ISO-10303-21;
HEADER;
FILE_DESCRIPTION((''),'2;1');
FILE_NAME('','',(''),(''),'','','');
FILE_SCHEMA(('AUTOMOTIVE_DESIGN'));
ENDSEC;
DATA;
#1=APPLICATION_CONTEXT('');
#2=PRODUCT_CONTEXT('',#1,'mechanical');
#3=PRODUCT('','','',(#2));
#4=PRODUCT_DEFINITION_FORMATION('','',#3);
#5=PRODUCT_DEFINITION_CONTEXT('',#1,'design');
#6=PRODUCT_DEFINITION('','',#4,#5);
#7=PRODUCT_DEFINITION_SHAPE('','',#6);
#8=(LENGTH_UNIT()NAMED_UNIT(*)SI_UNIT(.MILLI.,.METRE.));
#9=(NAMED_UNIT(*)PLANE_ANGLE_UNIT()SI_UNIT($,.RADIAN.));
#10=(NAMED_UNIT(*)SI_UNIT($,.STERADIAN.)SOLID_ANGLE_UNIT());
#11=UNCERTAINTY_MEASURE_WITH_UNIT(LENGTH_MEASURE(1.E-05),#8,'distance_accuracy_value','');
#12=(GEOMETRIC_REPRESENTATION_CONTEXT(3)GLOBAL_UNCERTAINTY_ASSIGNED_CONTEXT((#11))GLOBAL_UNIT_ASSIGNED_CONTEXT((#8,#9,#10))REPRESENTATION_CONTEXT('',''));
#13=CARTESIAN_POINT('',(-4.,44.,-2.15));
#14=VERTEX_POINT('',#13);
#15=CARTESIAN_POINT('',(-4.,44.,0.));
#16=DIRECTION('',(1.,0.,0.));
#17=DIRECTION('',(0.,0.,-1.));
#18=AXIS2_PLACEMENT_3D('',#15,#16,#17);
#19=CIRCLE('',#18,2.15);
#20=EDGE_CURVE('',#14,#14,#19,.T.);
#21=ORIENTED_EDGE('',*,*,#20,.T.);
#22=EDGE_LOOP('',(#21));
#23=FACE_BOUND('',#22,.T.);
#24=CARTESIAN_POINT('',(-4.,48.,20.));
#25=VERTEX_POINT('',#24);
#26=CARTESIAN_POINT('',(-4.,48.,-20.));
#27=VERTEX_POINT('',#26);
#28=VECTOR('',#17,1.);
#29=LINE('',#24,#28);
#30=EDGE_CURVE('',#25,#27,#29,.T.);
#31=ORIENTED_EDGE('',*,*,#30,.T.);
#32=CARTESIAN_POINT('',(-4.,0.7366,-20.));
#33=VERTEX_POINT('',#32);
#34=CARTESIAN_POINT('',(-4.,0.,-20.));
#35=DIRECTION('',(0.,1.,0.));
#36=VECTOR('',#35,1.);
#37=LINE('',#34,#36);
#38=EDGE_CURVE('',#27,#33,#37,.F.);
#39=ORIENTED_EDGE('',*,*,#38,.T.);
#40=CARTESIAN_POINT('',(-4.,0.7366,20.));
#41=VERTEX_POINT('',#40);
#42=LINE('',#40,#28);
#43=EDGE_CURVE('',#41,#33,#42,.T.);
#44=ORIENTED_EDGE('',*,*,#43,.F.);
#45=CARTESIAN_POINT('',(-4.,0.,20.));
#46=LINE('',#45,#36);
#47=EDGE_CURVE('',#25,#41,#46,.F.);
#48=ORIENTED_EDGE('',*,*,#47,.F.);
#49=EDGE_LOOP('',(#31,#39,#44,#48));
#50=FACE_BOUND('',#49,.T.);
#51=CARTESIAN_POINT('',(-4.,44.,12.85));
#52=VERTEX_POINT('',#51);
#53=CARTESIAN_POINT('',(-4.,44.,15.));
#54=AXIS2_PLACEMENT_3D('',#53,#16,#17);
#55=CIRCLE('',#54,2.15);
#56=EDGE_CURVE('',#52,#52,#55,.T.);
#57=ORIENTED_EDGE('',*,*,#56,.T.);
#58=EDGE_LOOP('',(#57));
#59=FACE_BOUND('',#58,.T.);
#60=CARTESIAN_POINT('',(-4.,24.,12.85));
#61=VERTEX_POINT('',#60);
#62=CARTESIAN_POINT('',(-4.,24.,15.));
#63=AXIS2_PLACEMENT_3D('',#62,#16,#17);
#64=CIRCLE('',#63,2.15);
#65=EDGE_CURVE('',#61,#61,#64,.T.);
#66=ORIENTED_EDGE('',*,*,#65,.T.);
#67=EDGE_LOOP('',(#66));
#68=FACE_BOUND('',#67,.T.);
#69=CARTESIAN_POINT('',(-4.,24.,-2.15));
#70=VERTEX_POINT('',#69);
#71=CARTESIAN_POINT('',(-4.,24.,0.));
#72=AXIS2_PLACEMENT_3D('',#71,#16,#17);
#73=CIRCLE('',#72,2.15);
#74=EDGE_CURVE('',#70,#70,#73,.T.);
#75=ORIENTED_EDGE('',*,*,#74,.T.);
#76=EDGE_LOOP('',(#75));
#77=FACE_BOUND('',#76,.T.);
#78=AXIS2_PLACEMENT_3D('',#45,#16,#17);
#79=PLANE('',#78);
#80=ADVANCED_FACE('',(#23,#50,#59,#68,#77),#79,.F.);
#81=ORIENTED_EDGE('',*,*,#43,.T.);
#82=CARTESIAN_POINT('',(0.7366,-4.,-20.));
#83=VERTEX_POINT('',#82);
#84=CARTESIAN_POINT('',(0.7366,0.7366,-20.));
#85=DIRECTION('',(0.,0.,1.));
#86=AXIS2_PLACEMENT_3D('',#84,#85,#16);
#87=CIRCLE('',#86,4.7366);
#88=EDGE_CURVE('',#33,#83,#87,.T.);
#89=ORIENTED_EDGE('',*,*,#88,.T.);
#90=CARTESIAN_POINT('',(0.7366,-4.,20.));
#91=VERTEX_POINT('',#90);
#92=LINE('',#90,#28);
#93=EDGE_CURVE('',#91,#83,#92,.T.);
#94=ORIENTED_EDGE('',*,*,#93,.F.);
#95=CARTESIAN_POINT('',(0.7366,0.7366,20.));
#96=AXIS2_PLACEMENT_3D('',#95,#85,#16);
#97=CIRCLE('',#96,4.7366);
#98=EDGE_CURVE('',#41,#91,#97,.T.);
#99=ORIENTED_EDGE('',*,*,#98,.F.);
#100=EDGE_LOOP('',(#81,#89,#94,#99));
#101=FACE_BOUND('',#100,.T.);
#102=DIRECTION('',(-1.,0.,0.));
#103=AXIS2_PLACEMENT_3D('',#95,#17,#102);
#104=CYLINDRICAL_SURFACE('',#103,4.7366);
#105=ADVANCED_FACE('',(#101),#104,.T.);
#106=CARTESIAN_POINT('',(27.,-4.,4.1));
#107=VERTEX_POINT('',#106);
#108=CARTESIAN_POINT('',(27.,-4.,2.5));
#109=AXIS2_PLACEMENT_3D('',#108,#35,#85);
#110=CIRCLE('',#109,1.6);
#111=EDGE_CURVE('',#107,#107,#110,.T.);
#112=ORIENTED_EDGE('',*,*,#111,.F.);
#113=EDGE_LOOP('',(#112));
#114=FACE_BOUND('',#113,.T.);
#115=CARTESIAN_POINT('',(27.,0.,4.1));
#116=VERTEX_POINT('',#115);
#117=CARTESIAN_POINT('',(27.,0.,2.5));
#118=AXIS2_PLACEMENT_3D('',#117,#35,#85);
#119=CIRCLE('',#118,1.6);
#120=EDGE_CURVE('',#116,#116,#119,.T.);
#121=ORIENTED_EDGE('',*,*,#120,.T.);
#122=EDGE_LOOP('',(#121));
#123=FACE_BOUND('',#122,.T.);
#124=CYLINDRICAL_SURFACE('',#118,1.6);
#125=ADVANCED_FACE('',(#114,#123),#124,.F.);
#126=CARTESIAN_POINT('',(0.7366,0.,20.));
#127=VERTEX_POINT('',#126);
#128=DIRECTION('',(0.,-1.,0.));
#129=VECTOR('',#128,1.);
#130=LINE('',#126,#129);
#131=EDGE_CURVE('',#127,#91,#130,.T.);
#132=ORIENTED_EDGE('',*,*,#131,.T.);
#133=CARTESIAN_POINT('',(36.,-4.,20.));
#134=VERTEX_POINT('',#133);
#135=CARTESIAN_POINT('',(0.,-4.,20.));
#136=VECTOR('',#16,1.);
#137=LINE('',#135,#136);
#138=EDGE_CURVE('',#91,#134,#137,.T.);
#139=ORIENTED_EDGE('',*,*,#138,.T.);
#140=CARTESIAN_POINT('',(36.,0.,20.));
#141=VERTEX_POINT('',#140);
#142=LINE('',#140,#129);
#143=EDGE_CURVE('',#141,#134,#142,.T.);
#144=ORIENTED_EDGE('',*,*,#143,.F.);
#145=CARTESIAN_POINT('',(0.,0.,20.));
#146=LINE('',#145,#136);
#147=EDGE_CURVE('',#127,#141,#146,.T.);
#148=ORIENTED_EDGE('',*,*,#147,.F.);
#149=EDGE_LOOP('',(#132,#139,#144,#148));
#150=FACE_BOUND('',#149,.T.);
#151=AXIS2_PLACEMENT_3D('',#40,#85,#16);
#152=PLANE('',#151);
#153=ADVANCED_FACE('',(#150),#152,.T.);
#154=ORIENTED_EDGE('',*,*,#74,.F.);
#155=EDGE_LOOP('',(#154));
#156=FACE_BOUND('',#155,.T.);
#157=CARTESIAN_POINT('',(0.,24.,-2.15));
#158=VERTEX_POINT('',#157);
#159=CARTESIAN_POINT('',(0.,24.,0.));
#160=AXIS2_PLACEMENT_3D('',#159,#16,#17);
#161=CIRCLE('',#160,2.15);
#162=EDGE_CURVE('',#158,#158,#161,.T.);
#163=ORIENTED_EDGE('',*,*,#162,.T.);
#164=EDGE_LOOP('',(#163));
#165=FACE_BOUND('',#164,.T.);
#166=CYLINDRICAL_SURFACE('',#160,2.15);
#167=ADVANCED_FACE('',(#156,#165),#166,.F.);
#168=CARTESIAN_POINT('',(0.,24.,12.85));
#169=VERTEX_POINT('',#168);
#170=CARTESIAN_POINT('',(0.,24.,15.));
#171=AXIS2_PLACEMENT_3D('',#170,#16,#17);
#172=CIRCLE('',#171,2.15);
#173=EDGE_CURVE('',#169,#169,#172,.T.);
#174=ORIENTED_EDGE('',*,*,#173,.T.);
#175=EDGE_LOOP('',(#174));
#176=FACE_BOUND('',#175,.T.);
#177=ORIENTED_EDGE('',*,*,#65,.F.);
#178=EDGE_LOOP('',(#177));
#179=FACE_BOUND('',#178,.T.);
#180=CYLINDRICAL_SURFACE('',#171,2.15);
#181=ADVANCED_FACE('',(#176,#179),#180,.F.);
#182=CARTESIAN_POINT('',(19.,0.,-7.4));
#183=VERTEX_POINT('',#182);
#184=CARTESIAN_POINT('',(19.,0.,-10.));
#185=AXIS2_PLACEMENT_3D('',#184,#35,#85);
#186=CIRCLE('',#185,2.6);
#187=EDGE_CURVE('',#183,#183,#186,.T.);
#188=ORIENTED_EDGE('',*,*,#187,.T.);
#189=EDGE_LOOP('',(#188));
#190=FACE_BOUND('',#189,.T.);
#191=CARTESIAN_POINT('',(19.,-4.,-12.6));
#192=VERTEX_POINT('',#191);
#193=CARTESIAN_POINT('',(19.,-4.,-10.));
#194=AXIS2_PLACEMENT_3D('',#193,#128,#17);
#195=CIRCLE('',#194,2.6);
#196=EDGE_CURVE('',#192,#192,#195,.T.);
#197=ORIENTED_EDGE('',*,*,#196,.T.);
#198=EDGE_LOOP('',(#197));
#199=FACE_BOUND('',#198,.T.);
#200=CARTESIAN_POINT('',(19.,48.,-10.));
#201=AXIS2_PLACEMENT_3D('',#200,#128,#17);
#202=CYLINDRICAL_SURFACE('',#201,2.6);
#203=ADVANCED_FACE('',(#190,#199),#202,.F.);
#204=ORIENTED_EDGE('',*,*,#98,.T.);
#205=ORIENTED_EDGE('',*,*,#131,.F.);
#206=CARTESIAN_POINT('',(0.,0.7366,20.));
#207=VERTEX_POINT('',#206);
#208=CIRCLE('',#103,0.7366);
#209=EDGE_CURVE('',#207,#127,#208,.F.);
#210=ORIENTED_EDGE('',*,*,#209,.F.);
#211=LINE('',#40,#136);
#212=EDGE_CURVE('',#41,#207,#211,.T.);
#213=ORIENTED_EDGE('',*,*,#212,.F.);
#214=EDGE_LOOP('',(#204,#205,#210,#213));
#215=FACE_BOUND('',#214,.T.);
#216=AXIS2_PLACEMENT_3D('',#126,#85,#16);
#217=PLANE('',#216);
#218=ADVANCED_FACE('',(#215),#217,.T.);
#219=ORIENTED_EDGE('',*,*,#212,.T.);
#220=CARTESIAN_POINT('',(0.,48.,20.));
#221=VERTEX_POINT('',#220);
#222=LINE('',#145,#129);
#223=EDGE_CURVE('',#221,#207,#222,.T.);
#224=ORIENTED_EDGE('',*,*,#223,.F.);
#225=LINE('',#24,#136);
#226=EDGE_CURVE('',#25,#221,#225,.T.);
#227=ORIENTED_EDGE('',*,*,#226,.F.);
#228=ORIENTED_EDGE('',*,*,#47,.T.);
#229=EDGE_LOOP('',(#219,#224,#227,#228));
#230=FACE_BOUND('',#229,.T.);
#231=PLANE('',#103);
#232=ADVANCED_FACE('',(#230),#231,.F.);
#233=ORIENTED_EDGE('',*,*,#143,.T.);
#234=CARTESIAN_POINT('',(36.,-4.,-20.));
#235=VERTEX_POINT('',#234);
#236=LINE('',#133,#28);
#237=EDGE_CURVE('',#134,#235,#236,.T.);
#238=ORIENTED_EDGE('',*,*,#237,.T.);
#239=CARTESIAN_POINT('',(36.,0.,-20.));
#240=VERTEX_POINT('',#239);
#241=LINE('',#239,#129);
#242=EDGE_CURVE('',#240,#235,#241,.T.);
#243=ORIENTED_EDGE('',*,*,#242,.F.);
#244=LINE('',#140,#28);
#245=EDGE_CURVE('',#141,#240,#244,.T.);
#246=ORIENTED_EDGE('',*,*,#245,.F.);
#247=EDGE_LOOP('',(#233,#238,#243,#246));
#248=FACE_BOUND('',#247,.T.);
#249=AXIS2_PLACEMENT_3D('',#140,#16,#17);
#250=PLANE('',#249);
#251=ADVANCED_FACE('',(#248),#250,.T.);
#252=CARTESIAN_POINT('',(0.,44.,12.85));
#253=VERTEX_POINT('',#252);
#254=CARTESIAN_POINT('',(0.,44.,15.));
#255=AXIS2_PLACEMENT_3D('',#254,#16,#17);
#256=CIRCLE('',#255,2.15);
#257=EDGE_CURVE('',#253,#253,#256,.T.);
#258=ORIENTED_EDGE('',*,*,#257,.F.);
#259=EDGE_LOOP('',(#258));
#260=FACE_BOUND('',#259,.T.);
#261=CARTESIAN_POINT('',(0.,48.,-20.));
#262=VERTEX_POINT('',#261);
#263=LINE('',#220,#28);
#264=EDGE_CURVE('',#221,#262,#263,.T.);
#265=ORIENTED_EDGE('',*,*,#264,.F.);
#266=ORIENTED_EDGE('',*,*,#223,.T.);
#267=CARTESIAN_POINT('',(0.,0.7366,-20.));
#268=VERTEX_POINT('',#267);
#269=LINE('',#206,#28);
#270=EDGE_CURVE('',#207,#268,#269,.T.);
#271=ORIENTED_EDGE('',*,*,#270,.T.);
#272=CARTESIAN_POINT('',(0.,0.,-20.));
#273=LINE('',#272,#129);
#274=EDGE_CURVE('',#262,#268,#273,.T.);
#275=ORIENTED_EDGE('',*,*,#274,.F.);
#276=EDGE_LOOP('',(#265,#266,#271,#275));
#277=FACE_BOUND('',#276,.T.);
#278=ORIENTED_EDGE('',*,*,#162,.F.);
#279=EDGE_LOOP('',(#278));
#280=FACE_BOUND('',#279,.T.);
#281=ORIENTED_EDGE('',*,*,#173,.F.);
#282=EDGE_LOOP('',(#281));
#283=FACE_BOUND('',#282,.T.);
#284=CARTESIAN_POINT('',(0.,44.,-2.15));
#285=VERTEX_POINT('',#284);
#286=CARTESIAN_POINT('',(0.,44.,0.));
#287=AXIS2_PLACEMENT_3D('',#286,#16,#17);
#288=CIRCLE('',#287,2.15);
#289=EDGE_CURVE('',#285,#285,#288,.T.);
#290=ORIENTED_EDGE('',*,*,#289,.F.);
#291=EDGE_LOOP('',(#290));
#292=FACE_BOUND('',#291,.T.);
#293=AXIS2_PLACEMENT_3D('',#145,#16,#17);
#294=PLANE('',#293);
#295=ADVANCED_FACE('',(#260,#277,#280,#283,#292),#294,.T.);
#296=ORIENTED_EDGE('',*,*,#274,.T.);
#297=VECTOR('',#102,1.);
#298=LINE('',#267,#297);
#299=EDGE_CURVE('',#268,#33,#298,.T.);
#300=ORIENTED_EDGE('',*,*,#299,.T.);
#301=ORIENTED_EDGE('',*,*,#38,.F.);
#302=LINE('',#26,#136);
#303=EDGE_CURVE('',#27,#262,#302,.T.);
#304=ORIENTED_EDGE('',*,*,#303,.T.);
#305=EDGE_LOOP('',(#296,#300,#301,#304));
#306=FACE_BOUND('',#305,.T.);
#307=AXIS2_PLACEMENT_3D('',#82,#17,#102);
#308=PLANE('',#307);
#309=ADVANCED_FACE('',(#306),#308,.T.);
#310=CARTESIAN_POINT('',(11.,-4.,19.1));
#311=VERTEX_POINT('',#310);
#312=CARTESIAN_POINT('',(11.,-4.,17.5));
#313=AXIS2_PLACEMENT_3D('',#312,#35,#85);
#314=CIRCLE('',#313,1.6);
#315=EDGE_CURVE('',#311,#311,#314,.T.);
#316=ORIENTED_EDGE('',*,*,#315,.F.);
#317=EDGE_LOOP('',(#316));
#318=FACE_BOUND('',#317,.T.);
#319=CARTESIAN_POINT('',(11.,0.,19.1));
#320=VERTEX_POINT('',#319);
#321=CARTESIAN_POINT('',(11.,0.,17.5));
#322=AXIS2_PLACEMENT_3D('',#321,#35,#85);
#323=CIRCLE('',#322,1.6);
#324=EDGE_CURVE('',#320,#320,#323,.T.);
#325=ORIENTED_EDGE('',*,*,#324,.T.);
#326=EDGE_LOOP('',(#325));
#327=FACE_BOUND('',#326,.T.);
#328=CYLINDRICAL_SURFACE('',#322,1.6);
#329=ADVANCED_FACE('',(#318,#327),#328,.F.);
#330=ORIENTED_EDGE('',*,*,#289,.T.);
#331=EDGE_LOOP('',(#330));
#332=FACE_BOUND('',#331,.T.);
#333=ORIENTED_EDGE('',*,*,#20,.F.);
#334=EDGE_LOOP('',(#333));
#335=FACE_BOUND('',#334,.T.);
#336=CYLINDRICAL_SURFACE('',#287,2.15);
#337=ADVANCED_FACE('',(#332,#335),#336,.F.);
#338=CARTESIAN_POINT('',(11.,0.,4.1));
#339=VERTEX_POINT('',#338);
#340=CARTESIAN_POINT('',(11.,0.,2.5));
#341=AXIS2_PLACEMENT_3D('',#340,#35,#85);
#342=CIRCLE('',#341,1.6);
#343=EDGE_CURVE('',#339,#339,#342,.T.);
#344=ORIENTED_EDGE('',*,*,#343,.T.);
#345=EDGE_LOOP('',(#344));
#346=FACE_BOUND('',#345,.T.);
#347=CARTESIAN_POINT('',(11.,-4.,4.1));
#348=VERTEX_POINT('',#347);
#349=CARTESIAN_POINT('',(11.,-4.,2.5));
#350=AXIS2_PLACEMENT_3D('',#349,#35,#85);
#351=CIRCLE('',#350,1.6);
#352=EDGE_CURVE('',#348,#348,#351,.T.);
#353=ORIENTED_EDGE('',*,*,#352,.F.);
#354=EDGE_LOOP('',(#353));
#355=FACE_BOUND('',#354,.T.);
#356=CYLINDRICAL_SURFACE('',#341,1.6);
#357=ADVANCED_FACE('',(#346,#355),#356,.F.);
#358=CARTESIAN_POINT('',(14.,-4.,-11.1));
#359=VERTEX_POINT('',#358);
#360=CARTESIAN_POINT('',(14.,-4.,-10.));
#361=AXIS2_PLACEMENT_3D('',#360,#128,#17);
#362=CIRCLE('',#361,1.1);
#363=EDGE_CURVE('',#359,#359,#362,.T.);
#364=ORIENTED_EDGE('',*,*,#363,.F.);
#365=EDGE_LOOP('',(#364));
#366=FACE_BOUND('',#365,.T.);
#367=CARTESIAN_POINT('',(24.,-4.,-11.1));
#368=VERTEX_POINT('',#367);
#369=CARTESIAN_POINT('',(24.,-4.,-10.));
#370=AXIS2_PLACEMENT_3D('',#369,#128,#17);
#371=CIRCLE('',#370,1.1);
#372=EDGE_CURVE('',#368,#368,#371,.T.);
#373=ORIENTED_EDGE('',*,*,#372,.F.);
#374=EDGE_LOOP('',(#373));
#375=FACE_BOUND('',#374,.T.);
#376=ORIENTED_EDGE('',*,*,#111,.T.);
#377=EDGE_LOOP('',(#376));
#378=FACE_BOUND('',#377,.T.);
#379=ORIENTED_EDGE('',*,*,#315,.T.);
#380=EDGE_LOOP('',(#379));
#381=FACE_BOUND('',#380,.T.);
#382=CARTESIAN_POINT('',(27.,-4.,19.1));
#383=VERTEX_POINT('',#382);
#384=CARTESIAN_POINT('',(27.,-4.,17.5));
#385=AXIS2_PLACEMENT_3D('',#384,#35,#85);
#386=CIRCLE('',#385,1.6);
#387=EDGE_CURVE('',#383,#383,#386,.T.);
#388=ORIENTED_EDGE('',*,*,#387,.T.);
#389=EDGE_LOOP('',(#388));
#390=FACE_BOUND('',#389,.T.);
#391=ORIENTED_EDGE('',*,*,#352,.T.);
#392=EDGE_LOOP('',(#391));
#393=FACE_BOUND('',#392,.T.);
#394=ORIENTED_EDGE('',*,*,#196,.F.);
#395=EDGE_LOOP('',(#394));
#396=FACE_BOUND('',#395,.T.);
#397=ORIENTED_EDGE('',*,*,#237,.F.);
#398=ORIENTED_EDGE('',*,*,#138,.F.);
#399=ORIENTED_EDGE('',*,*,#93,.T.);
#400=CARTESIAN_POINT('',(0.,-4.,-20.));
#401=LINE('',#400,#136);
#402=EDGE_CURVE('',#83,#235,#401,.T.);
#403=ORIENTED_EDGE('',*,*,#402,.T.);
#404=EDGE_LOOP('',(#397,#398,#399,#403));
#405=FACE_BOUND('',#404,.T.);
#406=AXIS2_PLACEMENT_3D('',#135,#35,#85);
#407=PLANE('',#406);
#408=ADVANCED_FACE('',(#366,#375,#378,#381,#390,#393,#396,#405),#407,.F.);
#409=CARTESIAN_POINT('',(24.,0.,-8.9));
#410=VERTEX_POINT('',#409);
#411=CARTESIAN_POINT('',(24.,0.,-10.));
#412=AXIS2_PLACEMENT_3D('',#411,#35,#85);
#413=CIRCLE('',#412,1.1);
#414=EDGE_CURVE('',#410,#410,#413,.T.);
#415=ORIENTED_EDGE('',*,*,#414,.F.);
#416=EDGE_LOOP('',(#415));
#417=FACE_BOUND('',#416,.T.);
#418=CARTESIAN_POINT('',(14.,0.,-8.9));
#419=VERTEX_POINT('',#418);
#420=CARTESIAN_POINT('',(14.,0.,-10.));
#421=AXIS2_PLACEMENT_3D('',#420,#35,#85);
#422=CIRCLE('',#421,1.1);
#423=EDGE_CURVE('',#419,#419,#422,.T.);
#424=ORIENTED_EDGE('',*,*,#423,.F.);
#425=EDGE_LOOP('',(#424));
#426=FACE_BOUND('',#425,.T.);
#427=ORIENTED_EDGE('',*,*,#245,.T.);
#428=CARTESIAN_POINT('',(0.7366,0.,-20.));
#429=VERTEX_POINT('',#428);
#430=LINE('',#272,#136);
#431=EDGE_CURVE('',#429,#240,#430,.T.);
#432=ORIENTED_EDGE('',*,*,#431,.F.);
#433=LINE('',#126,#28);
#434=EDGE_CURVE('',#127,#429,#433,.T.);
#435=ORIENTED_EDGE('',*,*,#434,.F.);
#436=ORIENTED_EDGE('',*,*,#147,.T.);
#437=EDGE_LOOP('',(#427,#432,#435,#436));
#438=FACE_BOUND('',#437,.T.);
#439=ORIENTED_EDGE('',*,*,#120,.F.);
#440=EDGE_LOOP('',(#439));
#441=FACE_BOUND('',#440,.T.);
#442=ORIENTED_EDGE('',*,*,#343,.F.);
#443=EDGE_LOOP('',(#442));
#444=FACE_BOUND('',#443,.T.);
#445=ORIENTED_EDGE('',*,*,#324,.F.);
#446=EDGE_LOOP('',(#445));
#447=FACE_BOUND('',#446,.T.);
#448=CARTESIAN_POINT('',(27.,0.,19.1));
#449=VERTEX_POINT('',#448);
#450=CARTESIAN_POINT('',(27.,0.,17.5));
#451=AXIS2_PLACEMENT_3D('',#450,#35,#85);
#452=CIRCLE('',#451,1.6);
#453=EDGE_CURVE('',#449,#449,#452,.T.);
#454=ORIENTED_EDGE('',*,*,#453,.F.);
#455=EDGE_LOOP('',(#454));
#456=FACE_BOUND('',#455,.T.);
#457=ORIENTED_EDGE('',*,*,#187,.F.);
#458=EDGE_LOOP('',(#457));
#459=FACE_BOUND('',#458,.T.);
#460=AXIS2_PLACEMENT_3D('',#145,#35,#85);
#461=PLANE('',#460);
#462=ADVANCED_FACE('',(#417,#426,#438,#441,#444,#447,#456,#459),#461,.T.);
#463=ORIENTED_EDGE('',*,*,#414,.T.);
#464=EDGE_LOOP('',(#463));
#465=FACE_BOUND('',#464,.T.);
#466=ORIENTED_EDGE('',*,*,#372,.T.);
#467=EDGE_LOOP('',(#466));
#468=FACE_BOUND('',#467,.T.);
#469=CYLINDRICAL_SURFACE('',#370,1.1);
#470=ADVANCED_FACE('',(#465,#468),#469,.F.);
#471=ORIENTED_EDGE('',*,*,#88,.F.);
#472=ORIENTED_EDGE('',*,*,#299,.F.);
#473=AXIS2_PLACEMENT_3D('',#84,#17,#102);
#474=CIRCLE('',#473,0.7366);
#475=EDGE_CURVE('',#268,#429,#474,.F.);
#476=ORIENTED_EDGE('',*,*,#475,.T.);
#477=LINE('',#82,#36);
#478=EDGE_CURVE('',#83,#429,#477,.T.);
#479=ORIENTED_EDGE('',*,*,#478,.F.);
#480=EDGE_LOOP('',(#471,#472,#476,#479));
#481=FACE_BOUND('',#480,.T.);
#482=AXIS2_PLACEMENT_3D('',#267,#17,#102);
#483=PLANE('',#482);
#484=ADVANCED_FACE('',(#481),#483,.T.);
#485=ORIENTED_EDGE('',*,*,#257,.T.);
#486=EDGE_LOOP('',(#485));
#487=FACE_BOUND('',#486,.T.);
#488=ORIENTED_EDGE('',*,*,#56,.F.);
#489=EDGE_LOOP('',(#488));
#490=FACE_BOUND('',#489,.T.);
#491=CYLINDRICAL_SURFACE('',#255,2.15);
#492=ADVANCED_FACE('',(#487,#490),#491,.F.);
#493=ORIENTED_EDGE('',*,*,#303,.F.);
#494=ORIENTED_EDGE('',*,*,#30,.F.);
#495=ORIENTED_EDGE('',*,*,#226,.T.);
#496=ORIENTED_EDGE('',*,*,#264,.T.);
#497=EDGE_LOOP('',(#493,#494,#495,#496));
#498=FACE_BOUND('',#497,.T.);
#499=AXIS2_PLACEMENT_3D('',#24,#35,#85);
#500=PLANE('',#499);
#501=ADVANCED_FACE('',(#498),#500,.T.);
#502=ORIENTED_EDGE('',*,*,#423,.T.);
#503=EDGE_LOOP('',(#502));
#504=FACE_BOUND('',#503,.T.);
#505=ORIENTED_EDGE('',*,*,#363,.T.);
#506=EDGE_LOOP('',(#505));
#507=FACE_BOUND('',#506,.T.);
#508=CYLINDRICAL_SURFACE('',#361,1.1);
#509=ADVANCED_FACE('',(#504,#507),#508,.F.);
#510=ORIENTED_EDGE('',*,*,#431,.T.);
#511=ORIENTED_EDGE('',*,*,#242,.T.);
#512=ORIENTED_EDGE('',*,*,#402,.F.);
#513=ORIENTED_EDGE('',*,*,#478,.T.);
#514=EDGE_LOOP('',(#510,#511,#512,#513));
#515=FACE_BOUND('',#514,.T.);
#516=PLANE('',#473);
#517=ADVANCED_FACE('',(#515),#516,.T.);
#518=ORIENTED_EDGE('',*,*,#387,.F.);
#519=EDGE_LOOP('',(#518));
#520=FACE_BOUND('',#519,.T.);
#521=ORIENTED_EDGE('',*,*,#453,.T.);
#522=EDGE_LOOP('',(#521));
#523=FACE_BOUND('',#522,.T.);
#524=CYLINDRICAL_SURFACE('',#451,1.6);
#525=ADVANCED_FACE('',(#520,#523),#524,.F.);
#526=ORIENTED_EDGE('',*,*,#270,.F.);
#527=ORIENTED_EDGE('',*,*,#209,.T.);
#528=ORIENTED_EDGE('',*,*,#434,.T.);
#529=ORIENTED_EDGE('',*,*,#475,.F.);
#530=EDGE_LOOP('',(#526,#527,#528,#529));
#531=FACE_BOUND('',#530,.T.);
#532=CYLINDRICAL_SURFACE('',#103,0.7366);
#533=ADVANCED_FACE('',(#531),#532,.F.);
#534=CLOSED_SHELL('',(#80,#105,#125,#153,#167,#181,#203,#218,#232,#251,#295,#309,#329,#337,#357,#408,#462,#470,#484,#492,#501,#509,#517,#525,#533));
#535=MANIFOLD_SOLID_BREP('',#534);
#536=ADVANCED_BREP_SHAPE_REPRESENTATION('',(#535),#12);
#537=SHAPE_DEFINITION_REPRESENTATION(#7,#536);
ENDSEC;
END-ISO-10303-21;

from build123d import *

# Parameters (mm, degrees)
SM_BASE_FLANGE_2_DEPTH = 20
HOLE_WIZARD_M3_1_D     = 3.2
SKETCH_24_R            = 2.6
CUT_EXTRUDE_2_DEPTH    = 67.332495807
HOLE_WIZARD_M4_1_D     = 4.3
HOLE_WIZARD_M2_1_D     = 2.2


# Sheet-metal steps are written as plain solids
with BuildPart() as part:
    # 草圖16 → 基材-凸緣2 (new, symmetric)
    with BuildSketch(Plane.XY):
        with BuildLine():
            Line((36, 0), (0.7366, 0))
            ThreePointArc((0.7366, 0), (0.215745145, 0.215745145), (0, 0.7366))
            Line((0, 0.7366), (0, 48))
            Line((0, 48), (-4, 48))
            Line((-4, 48), (-4, 0.7366))
            ThreePointArc((-4, 0.7366), (-2.61268198, -2.61268198), (0.7366, -4))
            Line((0.7366, -4), (36, -4))
            Line((36, -4), (36, 0))
        make_face()
    extrude(amount=SM_BASE_FLANGE_2_DEPTH, both=True)

    # M3 餘隙孔1 (through all)
    with Locations(Plane(origin=(0, 0, 0), x_dir=(-1, 0, 0), z_dir=(0, 1, 0))):
        with Locations((-27, 17.5), (-11, 2.5), (-11, 17.5), (-27, 2.5)):
            Hole(HOLE_WIZARD_M3_1_D / 2)

    # 草圖24 → 除料-伸長2 (cut, through all)
    with BuildSketch(Plane.XZ.offset(4)):
        with Locations(Location((19, -10, 0), (0, 0, 270))):
            Circle(SKETCH_24_R)
    extrude(amount=-CUT_EXTRUDE_2_DEPTH, mode=Mode.SUBTRACT)

    # M4 餘隙孔1 (through all)
    with Locations(Plane(origin=(0, 0, 0), x_dir=(0, 0, 1), z_dir=(1, 0, 0))):
        with Locations((0, -44), (15, -44), (15, -24), (0, -24)):
            Hole(HOLE_WIZARD_M4_1_D / 2)

    # M2 餘隙孔1 (through all)
    with Locations(Plane(origin=(0, -4, 0), x_dir=(-1, 0, 0), z_dir=(0, -1, 0))):
        with Locations((-14, 10), (-24, 10)):
            Hole(HOLE_WIZARD_M2_1_D / 2)


solid = part.part
